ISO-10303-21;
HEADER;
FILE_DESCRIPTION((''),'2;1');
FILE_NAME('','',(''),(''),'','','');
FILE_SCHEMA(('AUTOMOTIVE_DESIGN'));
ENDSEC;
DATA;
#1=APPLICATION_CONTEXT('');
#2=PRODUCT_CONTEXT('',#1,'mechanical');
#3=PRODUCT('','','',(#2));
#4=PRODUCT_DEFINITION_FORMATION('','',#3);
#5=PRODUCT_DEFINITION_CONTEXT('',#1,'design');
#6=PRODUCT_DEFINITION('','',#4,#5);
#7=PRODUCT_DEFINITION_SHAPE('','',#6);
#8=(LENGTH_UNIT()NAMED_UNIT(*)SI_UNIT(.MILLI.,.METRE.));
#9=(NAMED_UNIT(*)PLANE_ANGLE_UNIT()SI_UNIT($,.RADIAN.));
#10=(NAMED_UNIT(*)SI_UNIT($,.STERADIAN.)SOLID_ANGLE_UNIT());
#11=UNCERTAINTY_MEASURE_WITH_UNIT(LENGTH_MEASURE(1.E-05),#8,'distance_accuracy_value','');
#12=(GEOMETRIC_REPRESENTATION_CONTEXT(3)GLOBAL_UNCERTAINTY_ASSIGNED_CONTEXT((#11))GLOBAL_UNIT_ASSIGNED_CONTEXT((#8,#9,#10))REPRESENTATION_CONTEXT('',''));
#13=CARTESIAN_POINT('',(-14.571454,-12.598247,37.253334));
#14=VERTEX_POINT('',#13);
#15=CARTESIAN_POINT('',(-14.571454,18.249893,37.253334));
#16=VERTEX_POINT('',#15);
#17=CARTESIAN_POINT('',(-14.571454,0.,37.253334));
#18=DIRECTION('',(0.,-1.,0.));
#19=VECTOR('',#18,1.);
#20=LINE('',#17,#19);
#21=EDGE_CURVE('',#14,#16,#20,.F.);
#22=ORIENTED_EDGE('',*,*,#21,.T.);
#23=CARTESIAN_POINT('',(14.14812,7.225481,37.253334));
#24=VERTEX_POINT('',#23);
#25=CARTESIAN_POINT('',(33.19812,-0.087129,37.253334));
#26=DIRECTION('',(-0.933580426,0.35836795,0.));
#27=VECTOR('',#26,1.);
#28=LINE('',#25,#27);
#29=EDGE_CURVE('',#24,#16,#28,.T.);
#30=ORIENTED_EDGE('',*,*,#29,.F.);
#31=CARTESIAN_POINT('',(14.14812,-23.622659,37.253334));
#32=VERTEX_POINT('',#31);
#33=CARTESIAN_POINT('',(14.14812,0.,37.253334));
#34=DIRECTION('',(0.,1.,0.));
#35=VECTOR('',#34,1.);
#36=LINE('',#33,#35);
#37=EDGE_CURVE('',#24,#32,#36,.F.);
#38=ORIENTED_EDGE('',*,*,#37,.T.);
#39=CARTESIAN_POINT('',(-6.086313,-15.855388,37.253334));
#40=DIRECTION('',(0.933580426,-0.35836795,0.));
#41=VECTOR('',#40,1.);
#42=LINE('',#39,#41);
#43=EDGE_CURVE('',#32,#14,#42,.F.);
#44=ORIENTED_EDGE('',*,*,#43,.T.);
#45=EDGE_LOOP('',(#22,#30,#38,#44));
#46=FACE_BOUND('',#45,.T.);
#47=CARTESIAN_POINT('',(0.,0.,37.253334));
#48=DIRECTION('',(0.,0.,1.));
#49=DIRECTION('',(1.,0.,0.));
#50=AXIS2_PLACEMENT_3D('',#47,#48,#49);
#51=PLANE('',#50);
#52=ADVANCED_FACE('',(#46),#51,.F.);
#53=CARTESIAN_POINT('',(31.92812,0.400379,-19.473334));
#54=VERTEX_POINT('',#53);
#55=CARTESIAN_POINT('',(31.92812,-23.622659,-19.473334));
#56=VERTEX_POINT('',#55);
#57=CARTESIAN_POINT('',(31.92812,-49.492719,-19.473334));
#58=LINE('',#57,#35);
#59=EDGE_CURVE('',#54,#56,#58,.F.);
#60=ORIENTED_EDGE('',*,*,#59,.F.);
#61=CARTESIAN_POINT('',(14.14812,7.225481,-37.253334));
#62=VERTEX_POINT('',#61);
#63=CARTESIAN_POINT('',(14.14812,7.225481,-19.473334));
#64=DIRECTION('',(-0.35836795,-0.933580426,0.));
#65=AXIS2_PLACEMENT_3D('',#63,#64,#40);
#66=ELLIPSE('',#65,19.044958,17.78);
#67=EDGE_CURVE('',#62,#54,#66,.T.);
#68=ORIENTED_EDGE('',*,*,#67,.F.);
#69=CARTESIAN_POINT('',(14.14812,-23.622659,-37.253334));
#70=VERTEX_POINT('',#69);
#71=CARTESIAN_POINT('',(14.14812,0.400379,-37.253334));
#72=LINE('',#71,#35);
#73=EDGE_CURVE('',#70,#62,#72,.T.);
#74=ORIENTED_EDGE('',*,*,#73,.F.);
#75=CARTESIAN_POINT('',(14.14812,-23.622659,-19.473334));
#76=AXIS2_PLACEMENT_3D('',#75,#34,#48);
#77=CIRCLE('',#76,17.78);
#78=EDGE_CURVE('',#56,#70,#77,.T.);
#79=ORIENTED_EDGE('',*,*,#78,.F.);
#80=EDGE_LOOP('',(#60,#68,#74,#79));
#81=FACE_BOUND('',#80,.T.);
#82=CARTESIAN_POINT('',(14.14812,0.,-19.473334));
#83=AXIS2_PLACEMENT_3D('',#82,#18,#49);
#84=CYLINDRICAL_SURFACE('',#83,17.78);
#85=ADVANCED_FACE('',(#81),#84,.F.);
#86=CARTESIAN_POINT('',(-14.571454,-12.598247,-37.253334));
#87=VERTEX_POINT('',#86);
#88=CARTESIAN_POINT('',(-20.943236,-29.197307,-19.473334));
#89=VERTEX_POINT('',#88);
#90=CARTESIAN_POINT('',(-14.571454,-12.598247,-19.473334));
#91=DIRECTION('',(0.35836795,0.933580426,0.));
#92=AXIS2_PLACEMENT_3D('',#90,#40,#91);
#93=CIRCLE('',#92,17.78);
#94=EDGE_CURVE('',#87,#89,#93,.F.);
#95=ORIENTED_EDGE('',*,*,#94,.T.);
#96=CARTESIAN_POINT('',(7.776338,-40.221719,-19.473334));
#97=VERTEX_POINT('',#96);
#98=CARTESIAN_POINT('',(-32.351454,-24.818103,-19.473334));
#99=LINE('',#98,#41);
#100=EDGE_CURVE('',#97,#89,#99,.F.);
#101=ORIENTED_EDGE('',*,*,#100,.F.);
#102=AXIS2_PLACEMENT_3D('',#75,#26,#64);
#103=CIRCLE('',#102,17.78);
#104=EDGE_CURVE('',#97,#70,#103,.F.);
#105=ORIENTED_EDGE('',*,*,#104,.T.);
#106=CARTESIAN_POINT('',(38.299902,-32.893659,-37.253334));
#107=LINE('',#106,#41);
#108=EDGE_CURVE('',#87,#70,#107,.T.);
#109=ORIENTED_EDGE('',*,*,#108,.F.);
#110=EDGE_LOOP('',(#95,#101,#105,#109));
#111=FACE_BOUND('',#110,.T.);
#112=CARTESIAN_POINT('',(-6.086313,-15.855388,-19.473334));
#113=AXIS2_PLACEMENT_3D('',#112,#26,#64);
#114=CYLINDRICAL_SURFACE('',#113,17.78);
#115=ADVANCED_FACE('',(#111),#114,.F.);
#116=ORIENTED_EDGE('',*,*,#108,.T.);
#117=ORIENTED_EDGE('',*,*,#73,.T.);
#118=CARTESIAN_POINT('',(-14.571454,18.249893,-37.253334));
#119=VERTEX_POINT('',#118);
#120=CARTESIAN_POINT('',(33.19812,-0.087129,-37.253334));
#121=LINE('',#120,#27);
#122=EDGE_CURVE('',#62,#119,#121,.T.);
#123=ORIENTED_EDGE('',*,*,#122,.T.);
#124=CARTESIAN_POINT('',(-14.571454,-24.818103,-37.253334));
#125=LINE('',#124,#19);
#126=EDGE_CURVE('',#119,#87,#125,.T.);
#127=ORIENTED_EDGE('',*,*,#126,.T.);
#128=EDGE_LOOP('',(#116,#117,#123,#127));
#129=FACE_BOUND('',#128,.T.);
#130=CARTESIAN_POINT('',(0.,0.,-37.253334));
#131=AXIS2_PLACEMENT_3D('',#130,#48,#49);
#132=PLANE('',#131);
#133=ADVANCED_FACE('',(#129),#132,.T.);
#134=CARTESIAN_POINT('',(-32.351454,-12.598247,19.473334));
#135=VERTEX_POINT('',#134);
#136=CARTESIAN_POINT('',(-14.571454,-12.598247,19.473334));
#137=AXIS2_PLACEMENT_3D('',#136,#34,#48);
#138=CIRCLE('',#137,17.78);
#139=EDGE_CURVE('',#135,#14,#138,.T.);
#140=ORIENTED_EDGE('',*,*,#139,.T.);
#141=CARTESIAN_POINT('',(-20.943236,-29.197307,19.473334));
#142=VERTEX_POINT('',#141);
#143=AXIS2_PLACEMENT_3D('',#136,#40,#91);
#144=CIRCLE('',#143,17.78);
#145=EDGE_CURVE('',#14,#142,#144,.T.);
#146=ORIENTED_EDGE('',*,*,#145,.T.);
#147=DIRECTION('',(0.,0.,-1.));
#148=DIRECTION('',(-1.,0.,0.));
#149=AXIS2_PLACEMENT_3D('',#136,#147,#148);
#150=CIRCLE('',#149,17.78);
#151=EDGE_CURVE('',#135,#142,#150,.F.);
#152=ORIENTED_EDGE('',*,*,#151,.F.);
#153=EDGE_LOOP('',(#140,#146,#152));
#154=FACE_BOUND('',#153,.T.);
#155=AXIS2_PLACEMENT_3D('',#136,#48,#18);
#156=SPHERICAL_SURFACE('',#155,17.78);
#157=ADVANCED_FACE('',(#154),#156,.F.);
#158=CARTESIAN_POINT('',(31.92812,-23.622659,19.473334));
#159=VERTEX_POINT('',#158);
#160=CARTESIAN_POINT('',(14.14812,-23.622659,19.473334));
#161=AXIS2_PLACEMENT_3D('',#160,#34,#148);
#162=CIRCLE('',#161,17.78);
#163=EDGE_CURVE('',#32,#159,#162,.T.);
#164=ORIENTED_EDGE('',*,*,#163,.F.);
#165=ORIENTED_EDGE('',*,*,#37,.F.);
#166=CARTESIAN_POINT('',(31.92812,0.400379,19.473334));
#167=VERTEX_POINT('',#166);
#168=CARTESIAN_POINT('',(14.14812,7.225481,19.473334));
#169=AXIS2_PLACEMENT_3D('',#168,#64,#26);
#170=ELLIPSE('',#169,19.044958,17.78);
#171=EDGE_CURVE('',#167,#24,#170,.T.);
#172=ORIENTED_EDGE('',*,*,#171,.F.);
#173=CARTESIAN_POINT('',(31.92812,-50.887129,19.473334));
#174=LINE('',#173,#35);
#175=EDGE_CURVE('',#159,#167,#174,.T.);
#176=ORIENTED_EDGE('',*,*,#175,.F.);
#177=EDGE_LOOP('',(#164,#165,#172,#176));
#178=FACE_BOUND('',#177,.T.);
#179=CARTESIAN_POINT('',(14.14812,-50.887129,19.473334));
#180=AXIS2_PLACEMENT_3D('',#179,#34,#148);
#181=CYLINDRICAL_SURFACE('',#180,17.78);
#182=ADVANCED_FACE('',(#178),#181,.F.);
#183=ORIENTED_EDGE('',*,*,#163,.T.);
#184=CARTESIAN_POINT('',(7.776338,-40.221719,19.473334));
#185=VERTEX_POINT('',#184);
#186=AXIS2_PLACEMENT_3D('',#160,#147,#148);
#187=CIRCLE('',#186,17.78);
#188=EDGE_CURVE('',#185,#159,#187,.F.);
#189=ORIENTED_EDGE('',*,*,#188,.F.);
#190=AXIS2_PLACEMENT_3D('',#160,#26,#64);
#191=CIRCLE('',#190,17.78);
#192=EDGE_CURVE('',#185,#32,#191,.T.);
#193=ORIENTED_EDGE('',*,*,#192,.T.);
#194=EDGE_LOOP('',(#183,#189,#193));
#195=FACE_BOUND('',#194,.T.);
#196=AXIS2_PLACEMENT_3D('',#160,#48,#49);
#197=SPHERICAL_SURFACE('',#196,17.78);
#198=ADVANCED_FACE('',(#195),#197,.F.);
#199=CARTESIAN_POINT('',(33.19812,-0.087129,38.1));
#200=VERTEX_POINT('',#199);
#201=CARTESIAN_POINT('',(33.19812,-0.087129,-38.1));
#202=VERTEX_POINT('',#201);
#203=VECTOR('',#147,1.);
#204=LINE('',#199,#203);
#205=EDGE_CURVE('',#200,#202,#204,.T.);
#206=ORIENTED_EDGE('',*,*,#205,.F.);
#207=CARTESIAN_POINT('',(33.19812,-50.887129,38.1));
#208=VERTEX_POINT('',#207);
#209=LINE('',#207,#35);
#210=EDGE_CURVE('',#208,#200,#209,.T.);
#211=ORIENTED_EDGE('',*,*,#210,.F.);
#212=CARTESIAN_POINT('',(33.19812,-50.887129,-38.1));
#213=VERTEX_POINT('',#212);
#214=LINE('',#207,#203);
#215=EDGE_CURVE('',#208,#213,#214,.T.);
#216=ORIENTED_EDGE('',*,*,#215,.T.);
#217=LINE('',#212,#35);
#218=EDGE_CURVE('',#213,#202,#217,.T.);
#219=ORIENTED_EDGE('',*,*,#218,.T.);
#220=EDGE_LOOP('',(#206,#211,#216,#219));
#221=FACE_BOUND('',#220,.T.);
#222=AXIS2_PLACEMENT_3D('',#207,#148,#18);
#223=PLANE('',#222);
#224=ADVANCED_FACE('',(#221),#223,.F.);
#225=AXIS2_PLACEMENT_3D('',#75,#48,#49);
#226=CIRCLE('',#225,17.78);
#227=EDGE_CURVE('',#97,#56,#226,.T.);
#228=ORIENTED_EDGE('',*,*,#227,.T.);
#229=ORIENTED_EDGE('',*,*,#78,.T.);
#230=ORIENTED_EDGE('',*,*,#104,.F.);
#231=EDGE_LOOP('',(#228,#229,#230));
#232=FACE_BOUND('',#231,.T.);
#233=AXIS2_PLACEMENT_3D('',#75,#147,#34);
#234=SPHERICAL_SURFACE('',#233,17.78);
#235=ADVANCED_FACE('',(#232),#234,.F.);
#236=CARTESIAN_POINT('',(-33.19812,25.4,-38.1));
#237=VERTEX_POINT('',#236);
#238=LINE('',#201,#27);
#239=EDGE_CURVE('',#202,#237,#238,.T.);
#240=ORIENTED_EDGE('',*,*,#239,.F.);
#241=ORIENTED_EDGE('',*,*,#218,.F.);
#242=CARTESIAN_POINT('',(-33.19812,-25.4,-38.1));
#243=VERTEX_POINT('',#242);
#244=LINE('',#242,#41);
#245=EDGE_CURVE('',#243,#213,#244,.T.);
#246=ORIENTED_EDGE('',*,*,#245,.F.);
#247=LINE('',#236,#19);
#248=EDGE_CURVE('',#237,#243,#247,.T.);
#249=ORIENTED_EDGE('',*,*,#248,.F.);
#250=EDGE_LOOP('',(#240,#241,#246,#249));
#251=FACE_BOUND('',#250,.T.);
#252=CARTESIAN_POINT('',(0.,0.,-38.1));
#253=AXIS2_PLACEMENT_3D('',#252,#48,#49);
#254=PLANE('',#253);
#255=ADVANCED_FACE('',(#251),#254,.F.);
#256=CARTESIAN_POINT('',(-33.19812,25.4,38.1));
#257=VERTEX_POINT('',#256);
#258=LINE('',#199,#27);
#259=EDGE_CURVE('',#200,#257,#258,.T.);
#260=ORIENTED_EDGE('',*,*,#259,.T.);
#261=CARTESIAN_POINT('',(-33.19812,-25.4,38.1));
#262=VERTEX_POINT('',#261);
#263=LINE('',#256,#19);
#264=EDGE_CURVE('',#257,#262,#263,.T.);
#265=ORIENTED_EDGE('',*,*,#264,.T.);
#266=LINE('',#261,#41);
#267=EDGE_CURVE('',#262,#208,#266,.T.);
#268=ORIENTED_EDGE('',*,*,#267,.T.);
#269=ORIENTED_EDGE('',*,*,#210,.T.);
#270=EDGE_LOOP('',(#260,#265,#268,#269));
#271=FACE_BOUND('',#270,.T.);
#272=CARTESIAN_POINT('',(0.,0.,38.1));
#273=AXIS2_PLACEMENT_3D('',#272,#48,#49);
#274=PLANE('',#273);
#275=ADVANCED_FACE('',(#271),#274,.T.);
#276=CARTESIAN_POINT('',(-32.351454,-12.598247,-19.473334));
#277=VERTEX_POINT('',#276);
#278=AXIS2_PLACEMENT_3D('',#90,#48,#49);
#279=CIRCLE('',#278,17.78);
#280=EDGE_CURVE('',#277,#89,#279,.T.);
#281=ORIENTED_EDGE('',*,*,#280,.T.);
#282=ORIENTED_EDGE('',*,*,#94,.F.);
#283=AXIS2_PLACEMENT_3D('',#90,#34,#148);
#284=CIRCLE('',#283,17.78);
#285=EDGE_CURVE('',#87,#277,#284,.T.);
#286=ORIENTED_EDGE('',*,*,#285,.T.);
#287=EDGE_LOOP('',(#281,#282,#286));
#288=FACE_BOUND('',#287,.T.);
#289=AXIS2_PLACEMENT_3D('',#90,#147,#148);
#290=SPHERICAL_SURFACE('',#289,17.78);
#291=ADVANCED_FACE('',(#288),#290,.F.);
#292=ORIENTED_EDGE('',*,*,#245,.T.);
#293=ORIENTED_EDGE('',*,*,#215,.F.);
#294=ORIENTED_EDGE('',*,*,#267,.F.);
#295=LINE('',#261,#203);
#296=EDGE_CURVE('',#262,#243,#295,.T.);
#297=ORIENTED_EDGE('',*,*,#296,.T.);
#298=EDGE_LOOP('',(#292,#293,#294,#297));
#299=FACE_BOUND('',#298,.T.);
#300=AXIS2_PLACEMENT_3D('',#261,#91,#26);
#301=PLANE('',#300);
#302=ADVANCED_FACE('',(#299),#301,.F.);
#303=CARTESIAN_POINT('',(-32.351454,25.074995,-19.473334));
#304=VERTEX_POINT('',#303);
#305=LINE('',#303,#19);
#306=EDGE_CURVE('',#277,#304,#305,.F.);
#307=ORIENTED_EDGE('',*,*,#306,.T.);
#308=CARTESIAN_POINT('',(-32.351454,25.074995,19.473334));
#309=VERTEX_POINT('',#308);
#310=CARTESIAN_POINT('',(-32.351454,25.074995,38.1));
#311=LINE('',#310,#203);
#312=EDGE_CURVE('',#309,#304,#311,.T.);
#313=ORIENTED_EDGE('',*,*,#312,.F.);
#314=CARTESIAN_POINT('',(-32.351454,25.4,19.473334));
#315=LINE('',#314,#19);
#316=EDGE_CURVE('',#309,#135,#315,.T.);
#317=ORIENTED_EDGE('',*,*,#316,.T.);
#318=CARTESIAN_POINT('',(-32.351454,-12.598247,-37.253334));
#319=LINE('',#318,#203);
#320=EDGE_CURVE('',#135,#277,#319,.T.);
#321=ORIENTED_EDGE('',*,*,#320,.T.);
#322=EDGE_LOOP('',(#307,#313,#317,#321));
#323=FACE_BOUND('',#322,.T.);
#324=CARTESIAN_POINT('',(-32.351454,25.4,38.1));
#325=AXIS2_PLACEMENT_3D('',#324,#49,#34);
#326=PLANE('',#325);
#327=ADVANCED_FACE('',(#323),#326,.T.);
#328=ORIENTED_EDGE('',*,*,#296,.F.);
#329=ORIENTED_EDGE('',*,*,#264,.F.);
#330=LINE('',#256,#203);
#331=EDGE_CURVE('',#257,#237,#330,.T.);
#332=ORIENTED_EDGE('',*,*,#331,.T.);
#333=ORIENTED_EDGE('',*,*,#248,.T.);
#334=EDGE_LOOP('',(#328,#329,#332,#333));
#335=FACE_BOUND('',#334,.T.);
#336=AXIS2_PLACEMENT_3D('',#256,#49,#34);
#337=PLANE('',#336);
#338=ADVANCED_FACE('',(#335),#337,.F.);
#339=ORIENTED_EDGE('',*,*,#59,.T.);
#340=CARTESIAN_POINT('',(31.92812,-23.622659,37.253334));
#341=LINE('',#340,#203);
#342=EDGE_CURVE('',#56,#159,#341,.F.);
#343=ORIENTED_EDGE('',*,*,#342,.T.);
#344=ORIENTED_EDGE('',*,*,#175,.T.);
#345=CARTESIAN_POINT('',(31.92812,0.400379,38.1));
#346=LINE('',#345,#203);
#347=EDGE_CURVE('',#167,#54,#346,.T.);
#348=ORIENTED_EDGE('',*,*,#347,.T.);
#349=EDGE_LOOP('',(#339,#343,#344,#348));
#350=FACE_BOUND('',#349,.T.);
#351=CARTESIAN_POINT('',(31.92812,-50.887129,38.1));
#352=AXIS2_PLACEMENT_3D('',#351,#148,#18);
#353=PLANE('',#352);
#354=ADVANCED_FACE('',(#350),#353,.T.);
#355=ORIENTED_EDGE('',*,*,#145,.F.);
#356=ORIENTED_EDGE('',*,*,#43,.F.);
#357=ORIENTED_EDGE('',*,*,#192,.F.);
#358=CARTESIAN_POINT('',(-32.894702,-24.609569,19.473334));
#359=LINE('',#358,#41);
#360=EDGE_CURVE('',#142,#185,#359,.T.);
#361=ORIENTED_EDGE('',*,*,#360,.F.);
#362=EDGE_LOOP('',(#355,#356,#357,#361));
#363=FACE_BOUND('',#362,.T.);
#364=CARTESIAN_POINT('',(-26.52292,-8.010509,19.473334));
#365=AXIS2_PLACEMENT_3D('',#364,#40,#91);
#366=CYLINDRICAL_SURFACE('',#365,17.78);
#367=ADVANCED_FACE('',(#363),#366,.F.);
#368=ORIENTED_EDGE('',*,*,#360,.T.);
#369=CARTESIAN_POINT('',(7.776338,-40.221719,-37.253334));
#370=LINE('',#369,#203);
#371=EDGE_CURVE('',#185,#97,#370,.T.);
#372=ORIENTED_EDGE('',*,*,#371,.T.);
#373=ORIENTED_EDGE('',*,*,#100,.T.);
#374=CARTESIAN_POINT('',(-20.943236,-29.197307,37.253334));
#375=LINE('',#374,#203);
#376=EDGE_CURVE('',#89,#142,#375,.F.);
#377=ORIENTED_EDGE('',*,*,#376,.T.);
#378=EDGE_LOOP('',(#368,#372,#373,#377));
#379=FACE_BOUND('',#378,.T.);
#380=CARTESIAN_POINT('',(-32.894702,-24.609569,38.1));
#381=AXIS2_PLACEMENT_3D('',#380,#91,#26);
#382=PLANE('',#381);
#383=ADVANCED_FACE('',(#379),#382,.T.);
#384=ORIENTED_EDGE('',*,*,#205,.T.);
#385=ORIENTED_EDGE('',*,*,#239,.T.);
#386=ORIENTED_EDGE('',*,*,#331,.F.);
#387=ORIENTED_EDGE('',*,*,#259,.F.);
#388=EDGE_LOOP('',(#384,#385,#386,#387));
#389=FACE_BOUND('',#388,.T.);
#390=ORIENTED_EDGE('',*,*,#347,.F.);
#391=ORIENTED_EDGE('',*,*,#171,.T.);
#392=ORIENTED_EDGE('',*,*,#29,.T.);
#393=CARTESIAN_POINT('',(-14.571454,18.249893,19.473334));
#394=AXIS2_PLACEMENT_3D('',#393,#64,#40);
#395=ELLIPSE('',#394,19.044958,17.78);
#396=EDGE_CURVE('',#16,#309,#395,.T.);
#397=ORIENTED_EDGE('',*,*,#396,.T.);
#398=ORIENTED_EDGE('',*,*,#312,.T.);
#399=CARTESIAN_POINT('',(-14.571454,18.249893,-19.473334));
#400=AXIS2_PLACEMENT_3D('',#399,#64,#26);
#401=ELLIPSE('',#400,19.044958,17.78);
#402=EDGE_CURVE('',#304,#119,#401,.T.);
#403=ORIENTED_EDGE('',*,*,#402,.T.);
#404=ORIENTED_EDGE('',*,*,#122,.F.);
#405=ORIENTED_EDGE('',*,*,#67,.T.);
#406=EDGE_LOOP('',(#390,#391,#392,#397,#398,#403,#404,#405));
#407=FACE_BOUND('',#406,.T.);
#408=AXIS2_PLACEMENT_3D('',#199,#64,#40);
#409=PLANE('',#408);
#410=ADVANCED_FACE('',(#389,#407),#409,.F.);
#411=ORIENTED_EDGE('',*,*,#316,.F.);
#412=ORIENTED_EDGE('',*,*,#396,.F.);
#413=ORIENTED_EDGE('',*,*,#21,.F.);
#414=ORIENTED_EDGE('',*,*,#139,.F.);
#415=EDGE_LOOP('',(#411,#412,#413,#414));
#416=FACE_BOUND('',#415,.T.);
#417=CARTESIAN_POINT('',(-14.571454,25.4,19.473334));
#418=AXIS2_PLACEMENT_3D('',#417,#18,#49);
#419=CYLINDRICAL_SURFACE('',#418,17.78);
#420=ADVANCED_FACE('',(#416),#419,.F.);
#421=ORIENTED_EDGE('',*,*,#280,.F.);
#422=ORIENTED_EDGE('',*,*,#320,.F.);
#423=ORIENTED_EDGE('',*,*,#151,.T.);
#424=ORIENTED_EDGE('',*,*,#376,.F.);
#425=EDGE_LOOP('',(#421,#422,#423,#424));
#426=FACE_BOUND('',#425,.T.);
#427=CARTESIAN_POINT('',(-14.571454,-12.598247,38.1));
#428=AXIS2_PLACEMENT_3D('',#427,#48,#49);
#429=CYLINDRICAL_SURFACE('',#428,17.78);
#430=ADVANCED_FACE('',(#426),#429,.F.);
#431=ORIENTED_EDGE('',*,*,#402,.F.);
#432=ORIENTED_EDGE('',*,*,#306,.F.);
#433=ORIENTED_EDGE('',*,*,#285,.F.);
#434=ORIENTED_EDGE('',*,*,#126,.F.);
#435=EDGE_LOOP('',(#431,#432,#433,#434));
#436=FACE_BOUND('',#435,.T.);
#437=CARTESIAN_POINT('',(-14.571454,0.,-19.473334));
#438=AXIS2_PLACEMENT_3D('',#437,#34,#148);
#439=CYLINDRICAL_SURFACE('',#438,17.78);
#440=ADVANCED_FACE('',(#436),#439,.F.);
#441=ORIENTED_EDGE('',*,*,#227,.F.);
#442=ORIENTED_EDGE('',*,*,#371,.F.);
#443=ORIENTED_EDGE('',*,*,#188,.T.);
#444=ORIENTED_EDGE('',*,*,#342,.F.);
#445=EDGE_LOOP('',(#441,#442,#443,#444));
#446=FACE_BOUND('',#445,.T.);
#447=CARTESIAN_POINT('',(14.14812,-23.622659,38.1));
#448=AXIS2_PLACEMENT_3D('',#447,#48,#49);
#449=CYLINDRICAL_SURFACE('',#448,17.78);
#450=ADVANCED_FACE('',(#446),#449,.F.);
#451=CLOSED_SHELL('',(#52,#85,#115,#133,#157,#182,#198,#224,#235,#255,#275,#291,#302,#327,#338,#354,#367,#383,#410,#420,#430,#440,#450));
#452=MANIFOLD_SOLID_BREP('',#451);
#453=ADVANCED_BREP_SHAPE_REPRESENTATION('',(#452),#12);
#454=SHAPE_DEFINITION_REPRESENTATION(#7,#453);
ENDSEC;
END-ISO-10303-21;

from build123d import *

# Parameters (mm, degrees)
BOSS_EXTRUDE1_DEPTH = 38.1
SHELL1_START        = -37.25333418
SHELL1_DEPTH        = 74.50666836
FILLET1_R           = 17.78


# Read off the part's stored shape, not the designer's step: Shell1
with BuildPart() as part:
    # Sketch1 → Boss-Extrude1 (new, symmetric)
    with BuildSketch(Plane.XY):
        Polygon((-33.198119966, 25.4), (-33.198119966, -25.4), (33.198119966, -50.887128572), (33.198119966, -0.087128572), align=None)
    extrude(amount=BOSS_EXTRUDE1_DEPTH, both=True)

    # Shell1 outline → Shell1 (cut)
    with BuildSketch(Plane.XY.offset(SHELL1_START)):
        Polygon((-32.351454146, 25.074995442), (-32.351454146, -24.818102704), (31.928119966, -49.492719393), (31.928119966, 0.400378753), align=None)
    extrude(amount=SHELL1_DEPTH, mode=Mode.SUBTRACT)

    # Fillet1
    fillet1_edges = [part.edges().sort_by_distance(p)[0] for p in [
        (-32.351454146, 0.128446369, -37.25333418),
        (-0.21166709, -37.155411048, -37.25333418),
        (-32.351454146, -24.818102704, 0),
        (31.928119966, -24.54617032, -37.25333418),
        (31.928119966, -49.492719393, 0),
        (-32.351454146, 0.128446369, 37.25333418),
        (-0.21166709, -37.155411048, 37.25333418),
        (31.928119966, -24.54617032, 37.25333418),
    ]]
    fillet(fillet1_edges, radius=FILLET1_R)


solid = part.part
